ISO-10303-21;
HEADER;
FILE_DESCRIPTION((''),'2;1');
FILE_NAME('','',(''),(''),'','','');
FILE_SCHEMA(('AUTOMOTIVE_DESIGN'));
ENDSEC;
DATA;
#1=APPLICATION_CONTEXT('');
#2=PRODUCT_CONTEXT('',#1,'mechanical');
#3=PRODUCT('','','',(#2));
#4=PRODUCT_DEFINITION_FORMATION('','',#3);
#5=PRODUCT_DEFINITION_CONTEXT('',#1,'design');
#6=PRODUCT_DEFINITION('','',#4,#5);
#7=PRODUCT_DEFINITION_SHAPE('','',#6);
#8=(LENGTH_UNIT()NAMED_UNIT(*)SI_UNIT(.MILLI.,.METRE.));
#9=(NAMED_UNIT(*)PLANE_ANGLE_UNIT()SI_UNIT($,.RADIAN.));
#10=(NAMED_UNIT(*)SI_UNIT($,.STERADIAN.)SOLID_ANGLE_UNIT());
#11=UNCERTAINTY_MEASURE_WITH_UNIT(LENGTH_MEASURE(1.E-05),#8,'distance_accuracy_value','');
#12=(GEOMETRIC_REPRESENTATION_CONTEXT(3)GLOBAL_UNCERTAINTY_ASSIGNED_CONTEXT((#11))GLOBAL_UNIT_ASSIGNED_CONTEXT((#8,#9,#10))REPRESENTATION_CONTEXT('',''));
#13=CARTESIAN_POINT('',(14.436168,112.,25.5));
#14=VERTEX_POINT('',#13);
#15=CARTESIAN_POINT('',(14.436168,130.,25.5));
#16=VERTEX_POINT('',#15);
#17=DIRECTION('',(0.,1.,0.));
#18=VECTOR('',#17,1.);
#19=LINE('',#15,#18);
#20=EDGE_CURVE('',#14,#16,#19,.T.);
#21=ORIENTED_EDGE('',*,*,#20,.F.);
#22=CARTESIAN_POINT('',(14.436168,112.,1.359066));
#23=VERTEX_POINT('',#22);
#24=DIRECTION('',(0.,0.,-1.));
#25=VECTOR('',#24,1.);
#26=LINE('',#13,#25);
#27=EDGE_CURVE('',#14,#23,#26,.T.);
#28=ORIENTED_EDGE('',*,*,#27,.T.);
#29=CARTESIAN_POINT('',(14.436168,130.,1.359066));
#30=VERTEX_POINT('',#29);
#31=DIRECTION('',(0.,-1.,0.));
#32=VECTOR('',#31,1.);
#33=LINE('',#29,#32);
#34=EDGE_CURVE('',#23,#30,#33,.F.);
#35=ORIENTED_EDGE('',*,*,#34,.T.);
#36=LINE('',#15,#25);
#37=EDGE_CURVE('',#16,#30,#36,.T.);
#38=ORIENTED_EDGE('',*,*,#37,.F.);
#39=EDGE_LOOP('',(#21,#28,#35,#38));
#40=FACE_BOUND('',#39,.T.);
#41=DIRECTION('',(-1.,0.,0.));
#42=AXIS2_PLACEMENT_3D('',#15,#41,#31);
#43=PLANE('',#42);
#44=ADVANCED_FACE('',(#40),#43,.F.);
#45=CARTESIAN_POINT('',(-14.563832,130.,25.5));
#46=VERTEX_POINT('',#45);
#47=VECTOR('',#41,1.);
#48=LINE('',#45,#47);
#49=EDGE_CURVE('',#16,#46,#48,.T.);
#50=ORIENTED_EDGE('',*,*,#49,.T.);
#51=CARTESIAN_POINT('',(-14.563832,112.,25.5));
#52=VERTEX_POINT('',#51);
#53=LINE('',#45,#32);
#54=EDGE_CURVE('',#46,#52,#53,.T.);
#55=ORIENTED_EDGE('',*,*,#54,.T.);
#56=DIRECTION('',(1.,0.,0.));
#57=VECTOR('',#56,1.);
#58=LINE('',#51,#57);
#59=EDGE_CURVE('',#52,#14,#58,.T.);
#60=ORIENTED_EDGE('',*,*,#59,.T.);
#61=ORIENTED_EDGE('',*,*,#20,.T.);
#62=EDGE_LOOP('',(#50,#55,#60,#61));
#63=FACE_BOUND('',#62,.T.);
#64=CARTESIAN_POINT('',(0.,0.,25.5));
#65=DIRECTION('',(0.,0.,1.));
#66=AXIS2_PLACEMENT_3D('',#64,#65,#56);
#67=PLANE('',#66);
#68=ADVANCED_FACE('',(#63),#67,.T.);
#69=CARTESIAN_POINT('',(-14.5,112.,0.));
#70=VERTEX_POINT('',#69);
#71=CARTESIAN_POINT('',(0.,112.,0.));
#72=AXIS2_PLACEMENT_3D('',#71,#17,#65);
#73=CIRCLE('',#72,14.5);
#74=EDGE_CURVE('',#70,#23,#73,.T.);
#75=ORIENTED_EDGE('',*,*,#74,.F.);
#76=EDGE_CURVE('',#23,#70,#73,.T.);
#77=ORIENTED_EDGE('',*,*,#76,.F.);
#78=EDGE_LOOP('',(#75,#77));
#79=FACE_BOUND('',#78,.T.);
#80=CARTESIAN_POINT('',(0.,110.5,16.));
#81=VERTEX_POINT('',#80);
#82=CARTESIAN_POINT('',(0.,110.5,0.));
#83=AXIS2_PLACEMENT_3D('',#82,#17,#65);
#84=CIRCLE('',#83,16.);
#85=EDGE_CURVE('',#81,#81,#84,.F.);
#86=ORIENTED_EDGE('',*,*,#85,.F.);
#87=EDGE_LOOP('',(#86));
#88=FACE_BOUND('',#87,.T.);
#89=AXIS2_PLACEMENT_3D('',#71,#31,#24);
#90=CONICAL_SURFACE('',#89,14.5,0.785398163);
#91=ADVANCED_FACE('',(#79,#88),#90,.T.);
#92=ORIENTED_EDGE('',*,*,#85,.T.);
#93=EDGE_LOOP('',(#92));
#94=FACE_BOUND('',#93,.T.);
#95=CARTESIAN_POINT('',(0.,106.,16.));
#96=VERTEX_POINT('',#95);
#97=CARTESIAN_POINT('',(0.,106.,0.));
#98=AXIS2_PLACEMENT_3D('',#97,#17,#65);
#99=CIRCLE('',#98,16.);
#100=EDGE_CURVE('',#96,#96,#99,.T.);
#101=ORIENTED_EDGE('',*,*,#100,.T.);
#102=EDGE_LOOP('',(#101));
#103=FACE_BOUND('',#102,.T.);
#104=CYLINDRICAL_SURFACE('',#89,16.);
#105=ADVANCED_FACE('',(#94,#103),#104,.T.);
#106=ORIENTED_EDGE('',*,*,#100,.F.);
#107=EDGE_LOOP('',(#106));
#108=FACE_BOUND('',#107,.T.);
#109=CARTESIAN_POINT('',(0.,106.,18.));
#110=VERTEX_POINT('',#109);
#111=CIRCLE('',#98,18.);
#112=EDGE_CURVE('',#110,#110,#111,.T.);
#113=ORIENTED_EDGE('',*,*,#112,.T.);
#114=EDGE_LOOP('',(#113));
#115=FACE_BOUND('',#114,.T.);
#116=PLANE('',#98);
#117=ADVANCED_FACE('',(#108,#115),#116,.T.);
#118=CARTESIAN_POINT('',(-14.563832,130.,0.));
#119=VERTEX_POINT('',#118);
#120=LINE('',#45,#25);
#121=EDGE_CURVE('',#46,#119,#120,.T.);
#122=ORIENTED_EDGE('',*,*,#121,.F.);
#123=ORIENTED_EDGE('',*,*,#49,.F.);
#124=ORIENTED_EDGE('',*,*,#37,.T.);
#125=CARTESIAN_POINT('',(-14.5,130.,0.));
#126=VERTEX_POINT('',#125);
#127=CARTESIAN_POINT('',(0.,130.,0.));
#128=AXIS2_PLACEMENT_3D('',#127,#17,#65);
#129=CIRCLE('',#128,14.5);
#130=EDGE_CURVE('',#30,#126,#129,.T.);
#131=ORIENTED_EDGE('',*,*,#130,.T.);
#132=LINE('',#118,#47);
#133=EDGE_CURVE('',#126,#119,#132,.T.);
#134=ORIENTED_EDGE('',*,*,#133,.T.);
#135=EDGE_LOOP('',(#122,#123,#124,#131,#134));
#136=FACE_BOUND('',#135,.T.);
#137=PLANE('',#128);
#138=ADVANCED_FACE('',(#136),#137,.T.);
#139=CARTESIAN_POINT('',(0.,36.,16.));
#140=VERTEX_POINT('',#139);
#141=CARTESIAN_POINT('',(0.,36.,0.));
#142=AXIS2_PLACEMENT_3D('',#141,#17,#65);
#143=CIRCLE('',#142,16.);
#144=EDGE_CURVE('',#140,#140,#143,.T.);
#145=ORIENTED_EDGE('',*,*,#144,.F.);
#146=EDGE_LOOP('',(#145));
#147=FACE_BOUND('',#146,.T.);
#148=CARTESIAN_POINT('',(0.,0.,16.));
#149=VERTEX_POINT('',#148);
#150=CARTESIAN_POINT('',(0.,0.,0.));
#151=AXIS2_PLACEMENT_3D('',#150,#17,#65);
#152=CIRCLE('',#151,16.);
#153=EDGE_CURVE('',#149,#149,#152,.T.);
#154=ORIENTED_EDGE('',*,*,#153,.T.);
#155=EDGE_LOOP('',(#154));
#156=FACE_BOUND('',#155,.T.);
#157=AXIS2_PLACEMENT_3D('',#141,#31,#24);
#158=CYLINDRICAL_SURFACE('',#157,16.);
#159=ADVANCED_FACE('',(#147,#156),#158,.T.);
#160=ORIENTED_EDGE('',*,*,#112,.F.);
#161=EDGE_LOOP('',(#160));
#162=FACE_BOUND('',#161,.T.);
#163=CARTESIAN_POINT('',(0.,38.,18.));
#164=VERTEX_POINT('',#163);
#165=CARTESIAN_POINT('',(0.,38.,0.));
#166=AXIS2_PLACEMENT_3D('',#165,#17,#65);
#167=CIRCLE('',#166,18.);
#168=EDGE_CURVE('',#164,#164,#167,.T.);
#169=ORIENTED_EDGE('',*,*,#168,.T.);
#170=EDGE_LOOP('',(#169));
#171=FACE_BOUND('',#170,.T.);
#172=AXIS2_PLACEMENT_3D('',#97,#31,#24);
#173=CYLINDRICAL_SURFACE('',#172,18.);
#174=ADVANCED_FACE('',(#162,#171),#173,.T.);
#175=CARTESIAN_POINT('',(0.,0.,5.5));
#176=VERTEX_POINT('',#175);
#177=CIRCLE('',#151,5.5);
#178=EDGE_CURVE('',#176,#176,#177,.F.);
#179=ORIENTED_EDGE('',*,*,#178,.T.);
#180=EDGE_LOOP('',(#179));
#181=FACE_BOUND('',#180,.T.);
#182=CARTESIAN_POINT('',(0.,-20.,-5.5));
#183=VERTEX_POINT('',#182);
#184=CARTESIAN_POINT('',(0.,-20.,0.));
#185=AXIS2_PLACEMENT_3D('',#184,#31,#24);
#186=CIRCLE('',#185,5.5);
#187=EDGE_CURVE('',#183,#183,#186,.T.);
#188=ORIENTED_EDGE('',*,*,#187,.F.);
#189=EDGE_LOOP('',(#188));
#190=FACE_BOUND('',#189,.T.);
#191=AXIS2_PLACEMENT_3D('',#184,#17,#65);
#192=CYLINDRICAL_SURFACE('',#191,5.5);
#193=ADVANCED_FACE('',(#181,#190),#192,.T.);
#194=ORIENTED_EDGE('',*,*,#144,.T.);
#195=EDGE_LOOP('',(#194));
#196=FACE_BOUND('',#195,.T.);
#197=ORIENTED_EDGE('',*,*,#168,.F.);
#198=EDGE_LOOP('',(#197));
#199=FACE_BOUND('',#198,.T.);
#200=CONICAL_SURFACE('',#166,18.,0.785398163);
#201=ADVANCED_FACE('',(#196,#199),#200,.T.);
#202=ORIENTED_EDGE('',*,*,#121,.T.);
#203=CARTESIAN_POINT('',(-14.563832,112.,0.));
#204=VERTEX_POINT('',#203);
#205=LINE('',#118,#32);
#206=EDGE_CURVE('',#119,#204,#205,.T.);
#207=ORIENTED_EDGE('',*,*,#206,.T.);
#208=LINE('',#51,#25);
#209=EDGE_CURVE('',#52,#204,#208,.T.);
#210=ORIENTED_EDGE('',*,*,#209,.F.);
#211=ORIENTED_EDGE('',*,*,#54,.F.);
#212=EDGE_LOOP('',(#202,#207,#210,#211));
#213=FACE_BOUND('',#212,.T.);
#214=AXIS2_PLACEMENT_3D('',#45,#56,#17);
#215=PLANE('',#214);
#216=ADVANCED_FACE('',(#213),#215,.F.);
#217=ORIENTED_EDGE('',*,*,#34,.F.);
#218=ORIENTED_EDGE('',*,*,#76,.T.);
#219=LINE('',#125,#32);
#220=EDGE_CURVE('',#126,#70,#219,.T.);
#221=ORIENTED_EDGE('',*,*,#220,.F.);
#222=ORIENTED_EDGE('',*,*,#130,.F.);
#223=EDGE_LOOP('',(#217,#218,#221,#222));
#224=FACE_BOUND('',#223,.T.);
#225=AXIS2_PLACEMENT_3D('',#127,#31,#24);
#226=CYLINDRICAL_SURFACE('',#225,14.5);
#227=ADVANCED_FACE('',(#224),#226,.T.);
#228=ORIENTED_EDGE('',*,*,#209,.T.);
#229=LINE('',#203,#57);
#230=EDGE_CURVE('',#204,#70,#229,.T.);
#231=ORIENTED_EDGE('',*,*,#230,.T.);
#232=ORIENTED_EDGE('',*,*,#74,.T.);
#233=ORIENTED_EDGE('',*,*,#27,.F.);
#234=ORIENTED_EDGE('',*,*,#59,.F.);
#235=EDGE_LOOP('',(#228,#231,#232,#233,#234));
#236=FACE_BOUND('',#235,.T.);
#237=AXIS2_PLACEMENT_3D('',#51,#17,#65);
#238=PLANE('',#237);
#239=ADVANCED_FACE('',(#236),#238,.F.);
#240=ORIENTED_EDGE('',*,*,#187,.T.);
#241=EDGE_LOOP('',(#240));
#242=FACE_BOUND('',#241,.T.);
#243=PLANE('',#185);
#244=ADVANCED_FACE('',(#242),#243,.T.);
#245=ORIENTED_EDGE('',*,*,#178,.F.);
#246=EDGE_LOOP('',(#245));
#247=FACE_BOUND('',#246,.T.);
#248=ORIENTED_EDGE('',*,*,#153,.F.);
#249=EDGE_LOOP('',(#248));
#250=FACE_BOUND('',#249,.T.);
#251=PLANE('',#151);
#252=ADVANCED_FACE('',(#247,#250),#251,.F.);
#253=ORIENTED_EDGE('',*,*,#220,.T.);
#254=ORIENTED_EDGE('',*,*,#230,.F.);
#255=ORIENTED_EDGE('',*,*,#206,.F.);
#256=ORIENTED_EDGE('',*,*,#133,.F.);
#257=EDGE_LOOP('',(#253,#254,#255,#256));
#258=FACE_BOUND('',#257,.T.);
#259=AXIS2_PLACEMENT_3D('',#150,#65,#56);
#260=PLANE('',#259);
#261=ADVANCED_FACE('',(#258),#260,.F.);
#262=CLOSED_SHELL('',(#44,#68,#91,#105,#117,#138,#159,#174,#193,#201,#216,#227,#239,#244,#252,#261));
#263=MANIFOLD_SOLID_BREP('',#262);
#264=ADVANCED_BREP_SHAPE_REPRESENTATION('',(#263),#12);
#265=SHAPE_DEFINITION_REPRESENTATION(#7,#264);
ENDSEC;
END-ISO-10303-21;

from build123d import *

# Parameters (mm, degrees)
ESQUISSE1_R        = 16
BOSS_EXTRU_1_DEPTH = 36
ESQUISSE2_R        = 18
BOSS_EXTRU_2_DEPTH = 70
CHANFREIN1_SIZE    = 2
ESQUISSE3_R        = 16
BOSS_EXTRU_3_DEPTH = 6
ESQUISSE4_R        = 14.5
BOSS_EXTRU_4_DEPTH = 18
CHANFREIN2_SIZE    = 1.5
ESQUISSE5_W        = 29
ESQUISSE5_H        = 18
BOSS_EXTRU_5_DEPTH = 25.5
ESQUISSE6_R        = 5.5
BOSS_EXTRU_6_DEPTH = 20


with BuildPart() as part:
    # Esquisse1 → Boss.-Extru.1 (new body)
    with BuildSketch(Plane(origin=(0, 0, 0), x_dir=(1, 0, 0), z_dir=(0, 1, 0))):
        with Locations(Location((0, 0, 0), (0, 0, 270))):
            Circle(ESQUISSE1_R)
    extrude(amount=BOSS_EXTRU_1_DEPTH)

    # Esquisse2 → Boss.-Extru.2 (add)
    with BuildSketch(Plane(origin=(0, 36, 0), x_dir=(1, 0, 0), z_dir=(0, 1, 0))):
        with Locations(Location((0, 0, 0), (0, 0, 270))):
            Circle(ESQUISSE2_R)
    extrude(amount=BOSS_EXTRU_2_DEPTH)

    # Chanfrein1
    chanfrein1_edges = [part.edges().sort_by_distance(p)[0] for p in [
        (0, 36, -18),
    ]]
    chamfer(chanfrein1_edges, length=CHANFREIN1_SIZE - 0.0001)  # a hair under: the kernel refuses the full size

    # Esquisse3 → Boss.-Extru.3 (add)
    with BuildSketch(Plane(origin=(0, 106, 0), x_dir=(1, 0, 0), z_dir=(0, 1, 0))):
        with Locations(Location((0, 0, 0), (0, 0, 270))):
            Circle(ESQUISSE3_R)
    extrude(amount=BOSS_EXTRU_3_DEPTH)

    # Esquisse4 → Boss.-Extru.4 (add)
    with BuildSketch(Plane(origin=(0, 112, 0), x_dir=(1, 0, 0), z_dir=(0, 1, 0))):
        with Locations(Location((0, 0, 0), (0, 0, 270))):
            Circle(ESQUISSE4_R)
    extrude(amount=BOSS_EXTRU_4_DEPTH)

    # Chanfrein2
    chanfrein2_edges = [part.edges().sort_by_distance(p)[0] for p in [
        (0, 112, -16),
    ]]
    chamfer(chanfrein2_edges, length=CHANFREIN2_SIZE - 0.0001)  # a hair under: the kernel refuses the full size

    # Esquisse5 → Boss.-Extru.5 (add)
    with BuildSketch(Plane.XY):
        with Locations((-0.063832193, 121)):
            Rectangle(ESQUISSE5_W, ESQUISSE5_H)
    extrude(amount=BOSS_EXTRU_5_DEPTH)

    # Esquisse6 → Boss.-Extru.6 (add)
    with BuildSketch(Plane.XZ):
        with Locations(Location((0, 0, 0), (0, 0, 90))):
            Circle(ESQUISSE6_R)
    extrude(amount=BOSS_EXTRU_6_DEPTH)


solid = part.part
